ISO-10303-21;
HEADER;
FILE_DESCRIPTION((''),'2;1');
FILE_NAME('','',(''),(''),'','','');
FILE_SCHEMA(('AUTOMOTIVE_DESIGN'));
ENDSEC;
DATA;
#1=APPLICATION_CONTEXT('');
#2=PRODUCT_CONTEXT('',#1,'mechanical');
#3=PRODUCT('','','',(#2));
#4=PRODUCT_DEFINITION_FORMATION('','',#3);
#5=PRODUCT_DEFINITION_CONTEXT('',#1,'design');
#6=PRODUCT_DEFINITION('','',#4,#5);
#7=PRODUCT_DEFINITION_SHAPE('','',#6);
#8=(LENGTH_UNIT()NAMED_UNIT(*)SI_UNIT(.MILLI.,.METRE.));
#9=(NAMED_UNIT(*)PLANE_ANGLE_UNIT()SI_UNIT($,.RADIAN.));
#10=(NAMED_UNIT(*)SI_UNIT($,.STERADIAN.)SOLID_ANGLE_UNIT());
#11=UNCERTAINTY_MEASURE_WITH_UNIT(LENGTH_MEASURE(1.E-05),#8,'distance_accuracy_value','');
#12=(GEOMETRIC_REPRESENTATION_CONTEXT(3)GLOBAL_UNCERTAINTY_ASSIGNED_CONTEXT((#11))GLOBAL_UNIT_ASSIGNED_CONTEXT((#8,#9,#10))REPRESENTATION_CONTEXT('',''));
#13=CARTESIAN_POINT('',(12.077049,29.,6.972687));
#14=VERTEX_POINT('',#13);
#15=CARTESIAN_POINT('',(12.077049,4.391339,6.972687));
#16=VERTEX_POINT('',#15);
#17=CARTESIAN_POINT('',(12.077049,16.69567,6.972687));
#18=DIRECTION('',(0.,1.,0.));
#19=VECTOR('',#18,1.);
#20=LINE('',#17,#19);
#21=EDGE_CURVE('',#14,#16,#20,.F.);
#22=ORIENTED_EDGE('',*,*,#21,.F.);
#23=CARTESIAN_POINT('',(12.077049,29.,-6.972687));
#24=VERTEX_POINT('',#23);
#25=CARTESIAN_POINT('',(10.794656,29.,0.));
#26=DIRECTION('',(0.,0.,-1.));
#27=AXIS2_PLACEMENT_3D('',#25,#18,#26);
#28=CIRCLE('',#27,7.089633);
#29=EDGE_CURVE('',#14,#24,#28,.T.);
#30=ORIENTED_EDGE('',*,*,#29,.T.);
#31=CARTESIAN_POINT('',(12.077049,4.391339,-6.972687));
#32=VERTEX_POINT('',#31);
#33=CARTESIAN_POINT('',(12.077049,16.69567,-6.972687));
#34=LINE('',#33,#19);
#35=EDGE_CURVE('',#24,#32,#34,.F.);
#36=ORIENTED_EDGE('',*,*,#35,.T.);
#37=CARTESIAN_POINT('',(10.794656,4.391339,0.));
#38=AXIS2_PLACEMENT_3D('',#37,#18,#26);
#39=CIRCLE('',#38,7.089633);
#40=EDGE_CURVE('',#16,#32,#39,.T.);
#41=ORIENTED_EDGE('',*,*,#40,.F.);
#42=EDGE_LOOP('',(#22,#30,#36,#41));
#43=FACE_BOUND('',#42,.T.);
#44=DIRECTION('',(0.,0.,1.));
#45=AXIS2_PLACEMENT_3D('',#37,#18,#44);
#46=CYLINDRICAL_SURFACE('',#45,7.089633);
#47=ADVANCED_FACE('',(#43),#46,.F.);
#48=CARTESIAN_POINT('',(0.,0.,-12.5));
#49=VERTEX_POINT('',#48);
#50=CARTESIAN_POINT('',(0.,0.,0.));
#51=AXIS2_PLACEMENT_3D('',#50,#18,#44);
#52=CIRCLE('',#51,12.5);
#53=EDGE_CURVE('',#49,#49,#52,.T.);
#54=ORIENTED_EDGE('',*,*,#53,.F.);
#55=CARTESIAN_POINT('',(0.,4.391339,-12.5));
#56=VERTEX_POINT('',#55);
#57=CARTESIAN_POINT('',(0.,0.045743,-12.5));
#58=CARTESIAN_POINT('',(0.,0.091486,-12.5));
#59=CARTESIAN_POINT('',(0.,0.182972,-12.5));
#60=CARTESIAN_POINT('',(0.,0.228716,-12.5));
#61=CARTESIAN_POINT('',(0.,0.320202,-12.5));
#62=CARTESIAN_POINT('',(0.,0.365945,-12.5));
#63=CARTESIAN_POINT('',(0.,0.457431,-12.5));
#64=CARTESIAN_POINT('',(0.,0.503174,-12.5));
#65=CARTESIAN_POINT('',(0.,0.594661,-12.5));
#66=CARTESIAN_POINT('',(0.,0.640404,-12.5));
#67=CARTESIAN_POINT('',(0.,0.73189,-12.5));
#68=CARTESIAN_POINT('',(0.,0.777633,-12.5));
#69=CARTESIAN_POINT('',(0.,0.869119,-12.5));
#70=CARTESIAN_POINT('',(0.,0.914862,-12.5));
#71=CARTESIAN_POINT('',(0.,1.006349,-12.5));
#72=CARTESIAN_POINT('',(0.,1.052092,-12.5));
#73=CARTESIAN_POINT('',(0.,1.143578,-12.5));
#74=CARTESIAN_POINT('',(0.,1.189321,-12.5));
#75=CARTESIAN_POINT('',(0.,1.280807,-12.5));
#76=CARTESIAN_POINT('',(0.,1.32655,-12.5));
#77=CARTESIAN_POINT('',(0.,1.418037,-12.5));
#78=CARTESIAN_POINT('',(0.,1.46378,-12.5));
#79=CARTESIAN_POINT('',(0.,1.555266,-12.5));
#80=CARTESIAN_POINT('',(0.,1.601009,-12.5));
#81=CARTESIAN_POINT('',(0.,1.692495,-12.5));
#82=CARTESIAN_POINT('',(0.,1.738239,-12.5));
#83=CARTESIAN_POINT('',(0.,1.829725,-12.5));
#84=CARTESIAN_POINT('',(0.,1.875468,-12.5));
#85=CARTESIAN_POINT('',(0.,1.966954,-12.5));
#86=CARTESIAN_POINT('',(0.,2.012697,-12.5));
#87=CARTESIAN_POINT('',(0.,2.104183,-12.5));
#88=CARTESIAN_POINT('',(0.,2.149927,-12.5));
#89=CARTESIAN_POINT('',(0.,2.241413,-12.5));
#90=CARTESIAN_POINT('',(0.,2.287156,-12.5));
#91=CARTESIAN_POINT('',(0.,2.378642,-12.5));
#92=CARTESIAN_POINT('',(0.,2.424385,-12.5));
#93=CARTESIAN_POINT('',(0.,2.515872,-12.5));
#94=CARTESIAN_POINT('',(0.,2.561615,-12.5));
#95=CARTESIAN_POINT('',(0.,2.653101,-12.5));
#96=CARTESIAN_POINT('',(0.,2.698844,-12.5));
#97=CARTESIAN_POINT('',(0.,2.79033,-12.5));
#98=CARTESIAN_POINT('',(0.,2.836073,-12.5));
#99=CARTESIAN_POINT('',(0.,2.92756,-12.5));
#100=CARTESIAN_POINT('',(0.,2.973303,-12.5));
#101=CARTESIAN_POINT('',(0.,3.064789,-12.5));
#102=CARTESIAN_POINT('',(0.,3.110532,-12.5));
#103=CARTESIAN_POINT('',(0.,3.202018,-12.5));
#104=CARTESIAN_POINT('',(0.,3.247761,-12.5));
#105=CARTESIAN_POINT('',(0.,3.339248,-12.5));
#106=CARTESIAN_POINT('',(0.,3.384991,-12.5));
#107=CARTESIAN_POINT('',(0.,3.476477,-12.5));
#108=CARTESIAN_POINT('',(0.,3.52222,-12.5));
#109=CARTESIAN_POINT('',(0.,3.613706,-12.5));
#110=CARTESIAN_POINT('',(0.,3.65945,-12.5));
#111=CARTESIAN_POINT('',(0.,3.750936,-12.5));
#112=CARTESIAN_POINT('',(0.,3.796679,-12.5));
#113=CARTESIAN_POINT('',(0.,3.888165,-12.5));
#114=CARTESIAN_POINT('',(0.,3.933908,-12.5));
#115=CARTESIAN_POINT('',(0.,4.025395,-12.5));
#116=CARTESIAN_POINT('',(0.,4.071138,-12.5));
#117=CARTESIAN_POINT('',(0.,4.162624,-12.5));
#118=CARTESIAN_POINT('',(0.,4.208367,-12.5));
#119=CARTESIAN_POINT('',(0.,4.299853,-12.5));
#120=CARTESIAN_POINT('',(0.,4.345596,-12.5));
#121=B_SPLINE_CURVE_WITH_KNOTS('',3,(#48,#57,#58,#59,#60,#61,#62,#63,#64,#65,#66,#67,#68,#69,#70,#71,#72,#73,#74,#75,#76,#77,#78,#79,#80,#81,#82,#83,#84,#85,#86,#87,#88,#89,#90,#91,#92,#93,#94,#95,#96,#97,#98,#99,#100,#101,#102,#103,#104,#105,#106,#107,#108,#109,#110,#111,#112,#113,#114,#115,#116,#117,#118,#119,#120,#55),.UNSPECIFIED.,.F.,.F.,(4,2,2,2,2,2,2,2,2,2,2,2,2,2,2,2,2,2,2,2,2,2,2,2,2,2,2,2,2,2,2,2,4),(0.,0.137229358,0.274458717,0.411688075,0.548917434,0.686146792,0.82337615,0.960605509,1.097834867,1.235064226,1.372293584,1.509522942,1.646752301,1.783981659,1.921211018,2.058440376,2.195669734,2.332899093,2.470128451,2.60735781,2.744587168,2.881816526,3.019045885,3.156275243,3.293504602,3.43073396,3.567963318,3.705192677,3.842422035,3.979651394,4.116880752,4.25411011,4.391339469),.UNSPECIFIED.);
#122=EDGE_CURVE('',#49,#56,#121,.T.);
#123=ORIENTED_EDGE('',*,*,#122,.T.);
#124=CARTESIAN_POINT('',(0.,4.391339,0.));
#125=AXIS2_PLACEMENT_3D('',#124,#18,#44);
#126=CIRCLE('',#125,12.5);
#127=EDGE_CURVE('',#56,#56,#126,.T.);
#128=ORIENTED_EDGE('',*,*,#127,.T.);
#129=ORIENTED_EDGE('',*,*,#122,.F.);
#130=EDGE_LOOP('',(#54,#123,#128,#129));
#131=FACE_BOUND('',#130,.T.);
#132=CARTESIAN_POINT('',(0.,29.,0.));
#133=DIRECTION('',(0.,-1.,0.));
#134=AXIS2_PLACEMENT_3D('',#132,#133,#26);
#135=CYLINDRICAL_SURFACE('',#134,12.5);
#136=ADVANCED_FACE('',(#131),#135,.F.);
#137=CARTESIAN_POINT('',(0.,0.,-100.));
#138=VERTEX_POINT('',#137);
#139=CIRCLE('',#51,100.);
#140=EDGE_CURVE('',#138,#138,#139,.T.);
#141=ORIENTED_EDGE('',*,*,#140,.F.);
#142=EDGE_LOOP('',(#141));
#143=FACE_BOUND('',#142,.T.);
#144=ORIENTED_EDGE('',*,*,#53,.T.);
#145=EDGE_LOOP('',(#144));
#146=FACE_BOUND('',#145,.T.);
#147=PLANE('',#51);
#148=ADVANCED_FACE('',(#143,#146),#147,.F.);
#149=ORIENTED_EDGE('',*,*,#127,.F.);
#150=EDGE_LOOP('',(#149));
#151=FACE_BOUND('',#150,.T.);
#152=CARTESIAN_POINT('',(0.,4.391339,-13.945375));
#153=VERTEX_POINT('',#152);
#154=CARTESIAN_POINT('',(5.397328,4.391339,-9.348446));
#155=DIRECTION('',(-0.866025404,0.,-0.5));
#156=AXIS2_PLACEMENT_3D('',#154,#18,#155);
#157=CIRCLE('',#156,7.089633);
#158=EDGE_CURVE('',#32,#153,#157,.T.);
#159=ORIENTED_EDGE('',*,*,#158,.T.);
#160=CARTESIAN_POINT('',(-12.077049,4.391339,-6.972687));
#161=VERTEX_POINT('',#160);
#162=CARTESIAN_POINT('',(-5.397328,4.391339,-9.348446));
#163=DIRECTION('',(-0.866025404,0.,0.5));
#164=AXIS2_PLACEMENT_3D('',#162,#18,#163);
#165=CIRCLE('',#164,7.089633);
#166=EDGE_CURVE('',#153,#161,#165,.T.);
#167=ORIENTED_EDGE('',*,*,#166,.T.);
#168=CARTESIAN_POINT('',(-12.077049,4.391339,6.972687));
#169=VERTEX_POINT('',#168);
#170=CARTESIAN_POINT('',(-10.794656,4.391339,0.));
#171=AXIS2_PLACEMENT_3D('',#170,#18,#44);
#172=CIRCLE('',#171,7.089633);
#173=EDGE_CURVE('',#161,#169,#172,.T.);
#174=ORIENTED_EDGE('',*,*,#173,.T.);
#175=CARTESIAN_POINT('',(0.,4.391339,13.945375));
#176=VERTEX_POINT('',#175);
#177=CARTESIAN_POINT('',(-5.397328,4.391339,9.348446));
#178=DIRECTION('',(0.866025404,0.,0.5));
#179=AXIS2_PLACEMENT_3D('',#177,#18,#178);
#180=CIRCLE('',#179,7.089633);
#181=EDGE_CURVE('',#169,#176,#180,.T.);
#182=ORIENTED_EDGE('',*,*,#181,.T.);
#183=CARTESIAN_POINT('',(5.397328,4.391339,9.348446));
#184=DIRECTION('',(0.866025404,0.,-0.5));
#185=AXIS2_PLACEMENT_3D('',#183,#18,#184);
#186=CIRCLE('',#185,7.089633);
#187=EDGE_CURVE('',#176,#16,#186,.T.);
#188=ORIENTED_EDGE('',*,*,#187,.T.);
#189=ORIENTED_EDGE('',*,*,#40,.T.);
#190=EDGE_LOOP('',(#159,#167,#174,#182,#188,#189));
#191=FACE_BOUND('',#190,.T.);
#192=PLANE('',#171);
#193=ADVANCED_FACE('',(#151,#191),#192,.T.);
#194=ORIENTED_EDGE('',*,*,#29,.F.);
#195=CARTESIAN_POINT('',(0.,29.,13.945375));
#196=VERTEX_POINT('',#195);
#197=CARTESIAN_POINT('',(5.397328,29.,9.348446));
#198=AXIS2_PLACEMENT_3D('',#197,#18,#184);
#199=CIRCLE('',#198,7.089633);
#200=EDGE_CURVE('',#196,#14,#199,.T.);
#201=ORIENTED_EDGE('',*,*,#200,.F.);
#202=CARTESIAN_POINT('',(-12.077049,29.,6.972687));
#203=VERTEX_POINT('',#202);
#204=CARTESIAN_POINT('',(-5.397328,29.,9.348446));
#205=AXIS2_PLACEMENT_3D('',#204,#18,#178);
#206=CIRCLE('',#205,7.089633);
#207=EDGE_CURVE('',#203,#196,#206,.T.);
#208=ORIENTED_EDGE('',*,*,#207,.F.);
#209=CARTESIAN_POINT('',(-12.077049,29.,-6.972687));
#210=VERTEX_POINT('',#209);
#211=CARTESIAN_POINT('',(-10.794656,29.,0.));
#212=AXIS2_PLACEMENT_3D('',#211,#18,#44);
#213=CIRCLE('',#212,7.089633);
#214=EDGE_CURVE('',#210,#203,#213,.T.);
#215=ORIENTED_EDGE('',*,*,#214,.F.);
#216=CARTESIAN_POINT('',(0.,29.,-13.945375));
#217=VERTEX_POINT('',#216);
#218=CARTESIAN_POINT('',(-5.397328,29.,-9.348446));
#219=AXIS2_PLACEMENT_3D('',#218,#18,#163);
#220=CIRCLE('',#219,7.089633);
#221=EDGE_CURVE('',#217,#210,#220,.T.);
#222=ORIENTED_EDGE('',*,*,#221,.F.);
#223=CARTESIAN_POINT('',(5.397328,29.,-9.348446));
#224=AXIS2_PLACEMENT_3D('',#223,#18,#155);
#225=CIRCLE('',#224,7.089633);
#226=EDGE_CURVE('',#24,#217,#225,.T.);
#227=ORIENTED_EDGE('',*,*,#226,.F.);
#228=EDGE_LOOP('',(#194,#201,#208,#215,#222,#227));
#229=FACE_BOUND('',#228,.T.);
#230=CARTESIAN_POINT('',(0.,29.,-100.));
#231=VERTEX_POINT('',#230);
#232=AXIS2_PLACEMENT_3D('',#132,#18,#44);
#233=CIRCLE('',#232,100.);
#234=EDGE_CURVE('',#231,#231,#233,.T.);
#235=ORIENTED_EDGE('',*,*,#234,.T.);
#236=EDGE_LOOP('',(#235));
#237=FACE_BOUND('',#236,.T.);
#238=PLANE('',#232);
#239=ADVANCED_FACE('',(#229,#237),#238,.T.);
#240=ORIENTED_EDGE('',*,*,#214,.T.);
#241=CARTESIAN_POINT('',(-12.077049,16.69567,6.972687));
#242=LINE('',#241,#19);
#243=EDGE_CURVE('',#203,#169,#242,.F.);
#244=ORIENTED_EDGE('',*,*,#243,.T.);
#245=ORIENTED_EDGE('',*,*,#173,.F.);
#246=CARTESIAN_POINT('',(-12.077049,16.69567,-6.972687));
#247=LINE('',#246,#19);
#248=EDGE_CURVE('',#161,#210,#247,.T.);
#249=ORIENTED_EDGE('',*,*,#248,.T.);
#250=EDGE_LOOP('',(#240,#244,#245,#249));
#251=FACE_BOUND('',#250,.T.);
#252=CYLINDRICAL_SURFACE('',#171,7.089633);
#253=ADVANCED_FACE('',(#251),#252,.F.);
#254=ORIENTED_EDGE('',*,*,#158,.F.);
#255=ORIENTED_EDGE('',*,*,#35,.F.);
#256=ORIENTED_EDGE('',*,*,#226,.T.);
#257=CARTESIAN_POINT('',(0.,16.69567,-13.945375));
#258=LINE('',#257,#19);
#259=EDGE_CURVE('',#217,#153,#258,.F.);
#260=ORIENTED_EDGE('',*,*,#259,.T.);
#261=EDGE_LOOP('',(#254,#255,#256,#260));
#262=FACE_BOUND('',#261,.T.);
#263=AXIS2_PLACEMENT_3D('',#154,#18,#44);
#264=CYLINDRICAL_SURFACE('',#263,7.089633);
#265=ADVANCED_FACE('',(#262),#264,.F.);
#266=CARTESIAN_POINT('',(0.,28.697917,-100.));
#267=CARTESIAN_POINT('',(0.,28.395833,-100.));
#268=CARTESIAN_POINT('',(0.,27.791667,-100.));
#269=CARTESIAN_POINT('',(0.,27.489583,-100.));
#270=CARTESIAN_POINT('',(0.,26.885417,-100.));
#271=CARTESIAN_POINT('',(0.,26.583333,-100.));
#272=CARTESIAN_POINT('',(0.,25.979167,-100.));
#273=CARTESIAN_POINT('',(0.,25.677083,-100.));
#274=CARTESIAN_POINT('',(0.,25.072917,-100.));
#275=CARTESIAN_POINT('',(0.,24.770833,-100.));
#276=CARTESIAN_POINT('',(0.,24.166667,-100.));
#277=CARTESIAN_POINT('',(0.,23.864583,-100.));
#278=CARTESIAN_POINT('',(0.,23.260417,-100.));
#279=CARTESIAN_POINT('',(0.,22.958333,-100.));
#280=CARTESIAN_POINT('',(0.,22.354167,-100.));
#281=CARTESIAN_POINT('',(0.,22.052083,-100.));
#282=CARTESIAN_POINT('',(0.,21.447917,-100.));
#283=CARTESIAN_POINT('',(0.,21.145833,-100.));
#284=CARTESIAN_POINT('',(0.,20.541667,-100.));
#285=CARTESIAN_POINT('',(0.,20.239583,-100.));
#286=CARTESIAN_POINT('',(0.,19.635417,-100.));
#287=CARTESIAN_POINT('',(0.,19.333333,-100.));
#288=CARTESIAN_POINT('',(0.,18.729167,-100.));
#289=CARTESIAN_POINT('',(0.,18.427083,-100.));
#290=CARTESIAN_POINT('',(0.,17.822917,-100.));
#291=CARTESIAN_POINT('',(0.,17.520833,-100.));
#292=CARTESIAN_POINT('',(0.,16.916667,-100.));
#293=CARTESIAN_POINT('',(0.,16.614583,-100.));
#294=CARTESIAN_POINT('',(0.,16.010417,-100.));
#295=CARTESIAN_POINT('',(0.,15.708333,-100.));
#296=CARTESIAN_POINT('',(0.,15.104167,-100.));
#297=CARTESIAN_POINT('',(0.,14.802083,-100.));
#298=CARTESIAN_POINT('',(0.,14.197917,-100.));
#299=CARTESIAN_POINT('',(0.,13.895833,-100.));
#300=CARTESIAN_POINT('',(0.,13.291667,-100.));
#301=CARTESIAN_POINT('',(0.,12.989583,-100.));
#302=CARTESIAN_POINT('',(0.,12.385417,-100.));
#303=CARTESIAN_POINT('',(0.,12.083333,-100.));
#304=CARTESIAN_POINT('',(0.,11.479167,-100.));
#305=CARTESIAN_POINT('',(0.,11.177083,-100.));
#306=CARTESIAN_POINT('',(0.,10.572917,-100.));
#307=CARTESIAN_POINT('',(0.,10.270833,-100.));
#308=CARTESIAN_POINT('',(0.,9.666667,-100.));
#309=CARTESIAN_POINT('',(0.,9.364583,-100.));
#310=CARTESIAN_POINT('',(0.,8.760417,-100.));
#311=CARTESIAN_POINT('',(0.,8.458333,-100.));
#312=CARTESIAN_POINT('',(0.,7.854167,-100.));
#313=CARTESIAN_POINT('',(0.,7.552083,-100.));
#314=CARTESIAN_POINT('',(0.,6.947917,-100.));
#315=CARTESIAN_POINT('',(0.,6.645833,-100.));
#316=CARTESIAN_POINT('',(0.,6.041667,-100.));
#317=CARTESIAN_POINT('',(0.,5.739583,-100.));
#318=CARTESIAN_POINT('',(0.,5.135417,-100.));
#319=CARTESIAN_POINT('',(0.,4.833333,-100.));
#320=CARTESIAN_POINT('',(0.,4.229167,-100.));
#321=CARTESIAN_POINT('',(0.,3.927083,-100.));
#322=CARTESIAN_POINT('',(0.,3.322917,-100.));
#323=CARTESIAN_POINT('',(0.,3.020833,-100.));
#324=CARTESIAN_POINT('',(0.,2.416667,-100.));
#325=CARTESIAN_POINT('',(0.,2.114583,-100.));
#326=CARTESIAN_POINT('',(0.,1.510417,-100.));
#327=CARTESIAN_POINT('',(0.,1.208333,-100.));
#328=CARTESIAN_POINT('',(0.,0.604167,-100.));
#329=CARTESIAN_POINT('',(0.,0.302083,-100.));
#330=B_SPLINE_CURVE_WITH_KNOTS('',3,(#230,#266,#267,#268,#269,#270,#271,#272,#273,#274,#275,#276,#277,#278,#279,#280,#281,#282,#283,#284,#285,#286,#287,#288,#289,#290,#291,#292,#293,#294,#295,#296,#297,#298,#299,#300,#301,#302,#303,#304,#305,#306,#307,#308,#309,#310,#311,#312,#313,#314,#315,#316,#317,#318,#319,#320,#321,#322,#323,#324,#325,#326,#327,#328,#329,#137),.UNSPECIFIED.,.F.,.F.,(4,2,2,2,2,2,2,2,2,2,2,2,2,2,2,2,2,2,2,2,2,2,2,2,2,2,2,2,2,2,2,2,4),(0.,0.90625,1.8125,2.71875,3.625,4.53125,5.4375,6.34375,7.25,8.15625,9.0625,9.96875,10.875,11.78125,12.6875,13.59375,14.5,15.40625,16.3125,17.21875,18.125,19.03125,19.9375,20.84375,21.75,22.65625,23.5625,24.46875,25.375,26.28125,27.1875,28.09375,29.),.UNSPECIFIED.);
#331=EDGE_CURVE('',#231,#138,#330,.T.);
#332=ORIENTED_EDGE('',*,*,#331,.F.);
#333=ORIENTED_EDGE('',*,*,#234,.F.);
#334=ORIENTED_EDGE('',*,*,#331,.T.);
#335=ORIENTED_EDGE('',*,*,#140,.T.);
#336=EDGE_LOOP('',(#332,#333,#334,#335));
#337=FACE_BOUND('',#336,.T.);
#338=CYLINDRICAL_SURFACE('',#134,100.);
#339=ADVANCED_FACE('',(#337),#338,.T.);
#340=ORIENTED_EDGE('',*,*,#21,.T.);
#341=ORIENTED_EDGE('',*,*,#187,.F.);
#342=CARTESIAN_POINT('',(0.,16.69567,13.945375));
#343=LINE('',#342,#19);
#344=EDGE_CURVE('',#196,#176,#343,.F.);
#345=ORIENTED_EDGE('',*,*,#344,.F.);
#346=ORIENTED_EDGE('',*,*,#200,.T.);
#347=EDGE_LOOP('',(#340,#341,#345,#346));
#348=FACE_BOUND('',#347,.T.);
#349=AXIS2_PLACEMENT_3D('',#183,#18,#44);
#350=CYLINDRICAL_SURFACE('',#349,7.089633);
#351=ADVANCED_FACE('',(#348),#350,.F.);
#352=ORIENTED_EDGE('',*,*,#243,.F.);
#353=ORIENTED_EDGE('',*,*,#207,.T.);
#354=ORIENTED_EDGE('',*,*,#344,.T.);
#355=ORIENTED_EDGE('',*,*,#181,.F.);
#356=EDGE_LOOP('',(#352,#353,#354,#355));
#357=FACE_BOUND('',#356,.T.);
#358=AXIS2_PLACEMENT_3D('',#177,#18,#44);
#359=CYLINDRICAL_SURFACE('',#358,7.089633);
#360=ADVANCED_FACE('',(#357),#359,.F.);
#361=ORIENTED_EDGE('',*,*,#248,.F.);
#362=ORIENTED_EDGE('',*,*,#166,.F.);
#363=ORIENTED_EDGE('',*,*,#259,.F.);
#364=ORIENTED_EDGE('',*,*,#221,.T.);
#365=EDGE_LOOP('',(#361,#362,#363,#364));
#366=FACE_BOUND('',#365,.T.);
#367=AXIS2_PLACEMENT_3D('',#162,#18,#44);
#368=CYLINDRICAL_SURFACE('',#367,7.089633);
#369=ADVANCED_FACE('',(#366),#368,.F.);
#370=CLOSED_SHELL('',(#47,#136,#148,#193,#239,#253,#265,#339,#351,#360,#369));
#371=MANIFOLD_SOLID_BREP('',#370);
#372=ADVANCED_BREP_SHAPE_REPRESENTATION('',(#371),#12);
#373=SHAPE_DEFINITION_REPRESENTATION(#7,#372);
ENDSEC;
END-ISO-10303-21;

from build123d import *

# Parameters (mm, degrees)
SKETCH1_R           = 100
BOSS_EXTRUDE1_DEPTH = 29
SKETCH2_R           = 12.5
CUT_EXTRUDE1_DEPTH  = 145.364122967
SKETCH3_R           = 7.089633459
CUT_EXTRUDE2_DEPTH  = 24.608660531
CIRPATTERN1_COUNT   = 6


with BuildPart() as part:
    # Sketch1 → Boss-Extrude1 (new body)
    with BuildSketch(Plane(origin=(0, 0, 0), x_dir=(1, 0, 0), z_dir=(0, 1, 0))):
        Circle(SKETCH1_R)
    extrude(amount=BOSS_EXTRUDE1_DEPTH)

    # Sketch2 → Cut-Extrude1 (cut, through all)
    with BuildSketch(Plane(origin=(0, 0, 0), x_dir=(1, 0, 0), z_dir=(0, 1, 0))):
        Circle(SKETCH2_R)
    extrude(amount=CUT_EXTRUDE1_DEPTH, mode=Mode.SUBTRACT)

    # Sketch3 → Cut-Extrude2 (cut)
    with BuildSketch(Plane(origin=(0, 29, 0), x_dir=(1, 0, 0), z_dir=(0, 1, 0))):
        with Locations((-10.794655518, 0)):
            Circle(SKETCH3_R)
    cut_extrude2 = extrude(amount=-CUT_EXTRUDE2_DEPTH, mode=Mode.SUBTRACT)

    # CirPattern1: Cut-Extrude2 ×6 about axis
    cirpattern1_axis = Axis((0, 0, 0), (0, 1, 0))
    for i in range(1, CIRPATTERN1_COUNT):
        add(cut_extrude2.rotate(cirpattern1_axis, i * 360 / CIRPATTERN1_COUNT), mode=Mode.SUBTRACT)


solid = part.part
